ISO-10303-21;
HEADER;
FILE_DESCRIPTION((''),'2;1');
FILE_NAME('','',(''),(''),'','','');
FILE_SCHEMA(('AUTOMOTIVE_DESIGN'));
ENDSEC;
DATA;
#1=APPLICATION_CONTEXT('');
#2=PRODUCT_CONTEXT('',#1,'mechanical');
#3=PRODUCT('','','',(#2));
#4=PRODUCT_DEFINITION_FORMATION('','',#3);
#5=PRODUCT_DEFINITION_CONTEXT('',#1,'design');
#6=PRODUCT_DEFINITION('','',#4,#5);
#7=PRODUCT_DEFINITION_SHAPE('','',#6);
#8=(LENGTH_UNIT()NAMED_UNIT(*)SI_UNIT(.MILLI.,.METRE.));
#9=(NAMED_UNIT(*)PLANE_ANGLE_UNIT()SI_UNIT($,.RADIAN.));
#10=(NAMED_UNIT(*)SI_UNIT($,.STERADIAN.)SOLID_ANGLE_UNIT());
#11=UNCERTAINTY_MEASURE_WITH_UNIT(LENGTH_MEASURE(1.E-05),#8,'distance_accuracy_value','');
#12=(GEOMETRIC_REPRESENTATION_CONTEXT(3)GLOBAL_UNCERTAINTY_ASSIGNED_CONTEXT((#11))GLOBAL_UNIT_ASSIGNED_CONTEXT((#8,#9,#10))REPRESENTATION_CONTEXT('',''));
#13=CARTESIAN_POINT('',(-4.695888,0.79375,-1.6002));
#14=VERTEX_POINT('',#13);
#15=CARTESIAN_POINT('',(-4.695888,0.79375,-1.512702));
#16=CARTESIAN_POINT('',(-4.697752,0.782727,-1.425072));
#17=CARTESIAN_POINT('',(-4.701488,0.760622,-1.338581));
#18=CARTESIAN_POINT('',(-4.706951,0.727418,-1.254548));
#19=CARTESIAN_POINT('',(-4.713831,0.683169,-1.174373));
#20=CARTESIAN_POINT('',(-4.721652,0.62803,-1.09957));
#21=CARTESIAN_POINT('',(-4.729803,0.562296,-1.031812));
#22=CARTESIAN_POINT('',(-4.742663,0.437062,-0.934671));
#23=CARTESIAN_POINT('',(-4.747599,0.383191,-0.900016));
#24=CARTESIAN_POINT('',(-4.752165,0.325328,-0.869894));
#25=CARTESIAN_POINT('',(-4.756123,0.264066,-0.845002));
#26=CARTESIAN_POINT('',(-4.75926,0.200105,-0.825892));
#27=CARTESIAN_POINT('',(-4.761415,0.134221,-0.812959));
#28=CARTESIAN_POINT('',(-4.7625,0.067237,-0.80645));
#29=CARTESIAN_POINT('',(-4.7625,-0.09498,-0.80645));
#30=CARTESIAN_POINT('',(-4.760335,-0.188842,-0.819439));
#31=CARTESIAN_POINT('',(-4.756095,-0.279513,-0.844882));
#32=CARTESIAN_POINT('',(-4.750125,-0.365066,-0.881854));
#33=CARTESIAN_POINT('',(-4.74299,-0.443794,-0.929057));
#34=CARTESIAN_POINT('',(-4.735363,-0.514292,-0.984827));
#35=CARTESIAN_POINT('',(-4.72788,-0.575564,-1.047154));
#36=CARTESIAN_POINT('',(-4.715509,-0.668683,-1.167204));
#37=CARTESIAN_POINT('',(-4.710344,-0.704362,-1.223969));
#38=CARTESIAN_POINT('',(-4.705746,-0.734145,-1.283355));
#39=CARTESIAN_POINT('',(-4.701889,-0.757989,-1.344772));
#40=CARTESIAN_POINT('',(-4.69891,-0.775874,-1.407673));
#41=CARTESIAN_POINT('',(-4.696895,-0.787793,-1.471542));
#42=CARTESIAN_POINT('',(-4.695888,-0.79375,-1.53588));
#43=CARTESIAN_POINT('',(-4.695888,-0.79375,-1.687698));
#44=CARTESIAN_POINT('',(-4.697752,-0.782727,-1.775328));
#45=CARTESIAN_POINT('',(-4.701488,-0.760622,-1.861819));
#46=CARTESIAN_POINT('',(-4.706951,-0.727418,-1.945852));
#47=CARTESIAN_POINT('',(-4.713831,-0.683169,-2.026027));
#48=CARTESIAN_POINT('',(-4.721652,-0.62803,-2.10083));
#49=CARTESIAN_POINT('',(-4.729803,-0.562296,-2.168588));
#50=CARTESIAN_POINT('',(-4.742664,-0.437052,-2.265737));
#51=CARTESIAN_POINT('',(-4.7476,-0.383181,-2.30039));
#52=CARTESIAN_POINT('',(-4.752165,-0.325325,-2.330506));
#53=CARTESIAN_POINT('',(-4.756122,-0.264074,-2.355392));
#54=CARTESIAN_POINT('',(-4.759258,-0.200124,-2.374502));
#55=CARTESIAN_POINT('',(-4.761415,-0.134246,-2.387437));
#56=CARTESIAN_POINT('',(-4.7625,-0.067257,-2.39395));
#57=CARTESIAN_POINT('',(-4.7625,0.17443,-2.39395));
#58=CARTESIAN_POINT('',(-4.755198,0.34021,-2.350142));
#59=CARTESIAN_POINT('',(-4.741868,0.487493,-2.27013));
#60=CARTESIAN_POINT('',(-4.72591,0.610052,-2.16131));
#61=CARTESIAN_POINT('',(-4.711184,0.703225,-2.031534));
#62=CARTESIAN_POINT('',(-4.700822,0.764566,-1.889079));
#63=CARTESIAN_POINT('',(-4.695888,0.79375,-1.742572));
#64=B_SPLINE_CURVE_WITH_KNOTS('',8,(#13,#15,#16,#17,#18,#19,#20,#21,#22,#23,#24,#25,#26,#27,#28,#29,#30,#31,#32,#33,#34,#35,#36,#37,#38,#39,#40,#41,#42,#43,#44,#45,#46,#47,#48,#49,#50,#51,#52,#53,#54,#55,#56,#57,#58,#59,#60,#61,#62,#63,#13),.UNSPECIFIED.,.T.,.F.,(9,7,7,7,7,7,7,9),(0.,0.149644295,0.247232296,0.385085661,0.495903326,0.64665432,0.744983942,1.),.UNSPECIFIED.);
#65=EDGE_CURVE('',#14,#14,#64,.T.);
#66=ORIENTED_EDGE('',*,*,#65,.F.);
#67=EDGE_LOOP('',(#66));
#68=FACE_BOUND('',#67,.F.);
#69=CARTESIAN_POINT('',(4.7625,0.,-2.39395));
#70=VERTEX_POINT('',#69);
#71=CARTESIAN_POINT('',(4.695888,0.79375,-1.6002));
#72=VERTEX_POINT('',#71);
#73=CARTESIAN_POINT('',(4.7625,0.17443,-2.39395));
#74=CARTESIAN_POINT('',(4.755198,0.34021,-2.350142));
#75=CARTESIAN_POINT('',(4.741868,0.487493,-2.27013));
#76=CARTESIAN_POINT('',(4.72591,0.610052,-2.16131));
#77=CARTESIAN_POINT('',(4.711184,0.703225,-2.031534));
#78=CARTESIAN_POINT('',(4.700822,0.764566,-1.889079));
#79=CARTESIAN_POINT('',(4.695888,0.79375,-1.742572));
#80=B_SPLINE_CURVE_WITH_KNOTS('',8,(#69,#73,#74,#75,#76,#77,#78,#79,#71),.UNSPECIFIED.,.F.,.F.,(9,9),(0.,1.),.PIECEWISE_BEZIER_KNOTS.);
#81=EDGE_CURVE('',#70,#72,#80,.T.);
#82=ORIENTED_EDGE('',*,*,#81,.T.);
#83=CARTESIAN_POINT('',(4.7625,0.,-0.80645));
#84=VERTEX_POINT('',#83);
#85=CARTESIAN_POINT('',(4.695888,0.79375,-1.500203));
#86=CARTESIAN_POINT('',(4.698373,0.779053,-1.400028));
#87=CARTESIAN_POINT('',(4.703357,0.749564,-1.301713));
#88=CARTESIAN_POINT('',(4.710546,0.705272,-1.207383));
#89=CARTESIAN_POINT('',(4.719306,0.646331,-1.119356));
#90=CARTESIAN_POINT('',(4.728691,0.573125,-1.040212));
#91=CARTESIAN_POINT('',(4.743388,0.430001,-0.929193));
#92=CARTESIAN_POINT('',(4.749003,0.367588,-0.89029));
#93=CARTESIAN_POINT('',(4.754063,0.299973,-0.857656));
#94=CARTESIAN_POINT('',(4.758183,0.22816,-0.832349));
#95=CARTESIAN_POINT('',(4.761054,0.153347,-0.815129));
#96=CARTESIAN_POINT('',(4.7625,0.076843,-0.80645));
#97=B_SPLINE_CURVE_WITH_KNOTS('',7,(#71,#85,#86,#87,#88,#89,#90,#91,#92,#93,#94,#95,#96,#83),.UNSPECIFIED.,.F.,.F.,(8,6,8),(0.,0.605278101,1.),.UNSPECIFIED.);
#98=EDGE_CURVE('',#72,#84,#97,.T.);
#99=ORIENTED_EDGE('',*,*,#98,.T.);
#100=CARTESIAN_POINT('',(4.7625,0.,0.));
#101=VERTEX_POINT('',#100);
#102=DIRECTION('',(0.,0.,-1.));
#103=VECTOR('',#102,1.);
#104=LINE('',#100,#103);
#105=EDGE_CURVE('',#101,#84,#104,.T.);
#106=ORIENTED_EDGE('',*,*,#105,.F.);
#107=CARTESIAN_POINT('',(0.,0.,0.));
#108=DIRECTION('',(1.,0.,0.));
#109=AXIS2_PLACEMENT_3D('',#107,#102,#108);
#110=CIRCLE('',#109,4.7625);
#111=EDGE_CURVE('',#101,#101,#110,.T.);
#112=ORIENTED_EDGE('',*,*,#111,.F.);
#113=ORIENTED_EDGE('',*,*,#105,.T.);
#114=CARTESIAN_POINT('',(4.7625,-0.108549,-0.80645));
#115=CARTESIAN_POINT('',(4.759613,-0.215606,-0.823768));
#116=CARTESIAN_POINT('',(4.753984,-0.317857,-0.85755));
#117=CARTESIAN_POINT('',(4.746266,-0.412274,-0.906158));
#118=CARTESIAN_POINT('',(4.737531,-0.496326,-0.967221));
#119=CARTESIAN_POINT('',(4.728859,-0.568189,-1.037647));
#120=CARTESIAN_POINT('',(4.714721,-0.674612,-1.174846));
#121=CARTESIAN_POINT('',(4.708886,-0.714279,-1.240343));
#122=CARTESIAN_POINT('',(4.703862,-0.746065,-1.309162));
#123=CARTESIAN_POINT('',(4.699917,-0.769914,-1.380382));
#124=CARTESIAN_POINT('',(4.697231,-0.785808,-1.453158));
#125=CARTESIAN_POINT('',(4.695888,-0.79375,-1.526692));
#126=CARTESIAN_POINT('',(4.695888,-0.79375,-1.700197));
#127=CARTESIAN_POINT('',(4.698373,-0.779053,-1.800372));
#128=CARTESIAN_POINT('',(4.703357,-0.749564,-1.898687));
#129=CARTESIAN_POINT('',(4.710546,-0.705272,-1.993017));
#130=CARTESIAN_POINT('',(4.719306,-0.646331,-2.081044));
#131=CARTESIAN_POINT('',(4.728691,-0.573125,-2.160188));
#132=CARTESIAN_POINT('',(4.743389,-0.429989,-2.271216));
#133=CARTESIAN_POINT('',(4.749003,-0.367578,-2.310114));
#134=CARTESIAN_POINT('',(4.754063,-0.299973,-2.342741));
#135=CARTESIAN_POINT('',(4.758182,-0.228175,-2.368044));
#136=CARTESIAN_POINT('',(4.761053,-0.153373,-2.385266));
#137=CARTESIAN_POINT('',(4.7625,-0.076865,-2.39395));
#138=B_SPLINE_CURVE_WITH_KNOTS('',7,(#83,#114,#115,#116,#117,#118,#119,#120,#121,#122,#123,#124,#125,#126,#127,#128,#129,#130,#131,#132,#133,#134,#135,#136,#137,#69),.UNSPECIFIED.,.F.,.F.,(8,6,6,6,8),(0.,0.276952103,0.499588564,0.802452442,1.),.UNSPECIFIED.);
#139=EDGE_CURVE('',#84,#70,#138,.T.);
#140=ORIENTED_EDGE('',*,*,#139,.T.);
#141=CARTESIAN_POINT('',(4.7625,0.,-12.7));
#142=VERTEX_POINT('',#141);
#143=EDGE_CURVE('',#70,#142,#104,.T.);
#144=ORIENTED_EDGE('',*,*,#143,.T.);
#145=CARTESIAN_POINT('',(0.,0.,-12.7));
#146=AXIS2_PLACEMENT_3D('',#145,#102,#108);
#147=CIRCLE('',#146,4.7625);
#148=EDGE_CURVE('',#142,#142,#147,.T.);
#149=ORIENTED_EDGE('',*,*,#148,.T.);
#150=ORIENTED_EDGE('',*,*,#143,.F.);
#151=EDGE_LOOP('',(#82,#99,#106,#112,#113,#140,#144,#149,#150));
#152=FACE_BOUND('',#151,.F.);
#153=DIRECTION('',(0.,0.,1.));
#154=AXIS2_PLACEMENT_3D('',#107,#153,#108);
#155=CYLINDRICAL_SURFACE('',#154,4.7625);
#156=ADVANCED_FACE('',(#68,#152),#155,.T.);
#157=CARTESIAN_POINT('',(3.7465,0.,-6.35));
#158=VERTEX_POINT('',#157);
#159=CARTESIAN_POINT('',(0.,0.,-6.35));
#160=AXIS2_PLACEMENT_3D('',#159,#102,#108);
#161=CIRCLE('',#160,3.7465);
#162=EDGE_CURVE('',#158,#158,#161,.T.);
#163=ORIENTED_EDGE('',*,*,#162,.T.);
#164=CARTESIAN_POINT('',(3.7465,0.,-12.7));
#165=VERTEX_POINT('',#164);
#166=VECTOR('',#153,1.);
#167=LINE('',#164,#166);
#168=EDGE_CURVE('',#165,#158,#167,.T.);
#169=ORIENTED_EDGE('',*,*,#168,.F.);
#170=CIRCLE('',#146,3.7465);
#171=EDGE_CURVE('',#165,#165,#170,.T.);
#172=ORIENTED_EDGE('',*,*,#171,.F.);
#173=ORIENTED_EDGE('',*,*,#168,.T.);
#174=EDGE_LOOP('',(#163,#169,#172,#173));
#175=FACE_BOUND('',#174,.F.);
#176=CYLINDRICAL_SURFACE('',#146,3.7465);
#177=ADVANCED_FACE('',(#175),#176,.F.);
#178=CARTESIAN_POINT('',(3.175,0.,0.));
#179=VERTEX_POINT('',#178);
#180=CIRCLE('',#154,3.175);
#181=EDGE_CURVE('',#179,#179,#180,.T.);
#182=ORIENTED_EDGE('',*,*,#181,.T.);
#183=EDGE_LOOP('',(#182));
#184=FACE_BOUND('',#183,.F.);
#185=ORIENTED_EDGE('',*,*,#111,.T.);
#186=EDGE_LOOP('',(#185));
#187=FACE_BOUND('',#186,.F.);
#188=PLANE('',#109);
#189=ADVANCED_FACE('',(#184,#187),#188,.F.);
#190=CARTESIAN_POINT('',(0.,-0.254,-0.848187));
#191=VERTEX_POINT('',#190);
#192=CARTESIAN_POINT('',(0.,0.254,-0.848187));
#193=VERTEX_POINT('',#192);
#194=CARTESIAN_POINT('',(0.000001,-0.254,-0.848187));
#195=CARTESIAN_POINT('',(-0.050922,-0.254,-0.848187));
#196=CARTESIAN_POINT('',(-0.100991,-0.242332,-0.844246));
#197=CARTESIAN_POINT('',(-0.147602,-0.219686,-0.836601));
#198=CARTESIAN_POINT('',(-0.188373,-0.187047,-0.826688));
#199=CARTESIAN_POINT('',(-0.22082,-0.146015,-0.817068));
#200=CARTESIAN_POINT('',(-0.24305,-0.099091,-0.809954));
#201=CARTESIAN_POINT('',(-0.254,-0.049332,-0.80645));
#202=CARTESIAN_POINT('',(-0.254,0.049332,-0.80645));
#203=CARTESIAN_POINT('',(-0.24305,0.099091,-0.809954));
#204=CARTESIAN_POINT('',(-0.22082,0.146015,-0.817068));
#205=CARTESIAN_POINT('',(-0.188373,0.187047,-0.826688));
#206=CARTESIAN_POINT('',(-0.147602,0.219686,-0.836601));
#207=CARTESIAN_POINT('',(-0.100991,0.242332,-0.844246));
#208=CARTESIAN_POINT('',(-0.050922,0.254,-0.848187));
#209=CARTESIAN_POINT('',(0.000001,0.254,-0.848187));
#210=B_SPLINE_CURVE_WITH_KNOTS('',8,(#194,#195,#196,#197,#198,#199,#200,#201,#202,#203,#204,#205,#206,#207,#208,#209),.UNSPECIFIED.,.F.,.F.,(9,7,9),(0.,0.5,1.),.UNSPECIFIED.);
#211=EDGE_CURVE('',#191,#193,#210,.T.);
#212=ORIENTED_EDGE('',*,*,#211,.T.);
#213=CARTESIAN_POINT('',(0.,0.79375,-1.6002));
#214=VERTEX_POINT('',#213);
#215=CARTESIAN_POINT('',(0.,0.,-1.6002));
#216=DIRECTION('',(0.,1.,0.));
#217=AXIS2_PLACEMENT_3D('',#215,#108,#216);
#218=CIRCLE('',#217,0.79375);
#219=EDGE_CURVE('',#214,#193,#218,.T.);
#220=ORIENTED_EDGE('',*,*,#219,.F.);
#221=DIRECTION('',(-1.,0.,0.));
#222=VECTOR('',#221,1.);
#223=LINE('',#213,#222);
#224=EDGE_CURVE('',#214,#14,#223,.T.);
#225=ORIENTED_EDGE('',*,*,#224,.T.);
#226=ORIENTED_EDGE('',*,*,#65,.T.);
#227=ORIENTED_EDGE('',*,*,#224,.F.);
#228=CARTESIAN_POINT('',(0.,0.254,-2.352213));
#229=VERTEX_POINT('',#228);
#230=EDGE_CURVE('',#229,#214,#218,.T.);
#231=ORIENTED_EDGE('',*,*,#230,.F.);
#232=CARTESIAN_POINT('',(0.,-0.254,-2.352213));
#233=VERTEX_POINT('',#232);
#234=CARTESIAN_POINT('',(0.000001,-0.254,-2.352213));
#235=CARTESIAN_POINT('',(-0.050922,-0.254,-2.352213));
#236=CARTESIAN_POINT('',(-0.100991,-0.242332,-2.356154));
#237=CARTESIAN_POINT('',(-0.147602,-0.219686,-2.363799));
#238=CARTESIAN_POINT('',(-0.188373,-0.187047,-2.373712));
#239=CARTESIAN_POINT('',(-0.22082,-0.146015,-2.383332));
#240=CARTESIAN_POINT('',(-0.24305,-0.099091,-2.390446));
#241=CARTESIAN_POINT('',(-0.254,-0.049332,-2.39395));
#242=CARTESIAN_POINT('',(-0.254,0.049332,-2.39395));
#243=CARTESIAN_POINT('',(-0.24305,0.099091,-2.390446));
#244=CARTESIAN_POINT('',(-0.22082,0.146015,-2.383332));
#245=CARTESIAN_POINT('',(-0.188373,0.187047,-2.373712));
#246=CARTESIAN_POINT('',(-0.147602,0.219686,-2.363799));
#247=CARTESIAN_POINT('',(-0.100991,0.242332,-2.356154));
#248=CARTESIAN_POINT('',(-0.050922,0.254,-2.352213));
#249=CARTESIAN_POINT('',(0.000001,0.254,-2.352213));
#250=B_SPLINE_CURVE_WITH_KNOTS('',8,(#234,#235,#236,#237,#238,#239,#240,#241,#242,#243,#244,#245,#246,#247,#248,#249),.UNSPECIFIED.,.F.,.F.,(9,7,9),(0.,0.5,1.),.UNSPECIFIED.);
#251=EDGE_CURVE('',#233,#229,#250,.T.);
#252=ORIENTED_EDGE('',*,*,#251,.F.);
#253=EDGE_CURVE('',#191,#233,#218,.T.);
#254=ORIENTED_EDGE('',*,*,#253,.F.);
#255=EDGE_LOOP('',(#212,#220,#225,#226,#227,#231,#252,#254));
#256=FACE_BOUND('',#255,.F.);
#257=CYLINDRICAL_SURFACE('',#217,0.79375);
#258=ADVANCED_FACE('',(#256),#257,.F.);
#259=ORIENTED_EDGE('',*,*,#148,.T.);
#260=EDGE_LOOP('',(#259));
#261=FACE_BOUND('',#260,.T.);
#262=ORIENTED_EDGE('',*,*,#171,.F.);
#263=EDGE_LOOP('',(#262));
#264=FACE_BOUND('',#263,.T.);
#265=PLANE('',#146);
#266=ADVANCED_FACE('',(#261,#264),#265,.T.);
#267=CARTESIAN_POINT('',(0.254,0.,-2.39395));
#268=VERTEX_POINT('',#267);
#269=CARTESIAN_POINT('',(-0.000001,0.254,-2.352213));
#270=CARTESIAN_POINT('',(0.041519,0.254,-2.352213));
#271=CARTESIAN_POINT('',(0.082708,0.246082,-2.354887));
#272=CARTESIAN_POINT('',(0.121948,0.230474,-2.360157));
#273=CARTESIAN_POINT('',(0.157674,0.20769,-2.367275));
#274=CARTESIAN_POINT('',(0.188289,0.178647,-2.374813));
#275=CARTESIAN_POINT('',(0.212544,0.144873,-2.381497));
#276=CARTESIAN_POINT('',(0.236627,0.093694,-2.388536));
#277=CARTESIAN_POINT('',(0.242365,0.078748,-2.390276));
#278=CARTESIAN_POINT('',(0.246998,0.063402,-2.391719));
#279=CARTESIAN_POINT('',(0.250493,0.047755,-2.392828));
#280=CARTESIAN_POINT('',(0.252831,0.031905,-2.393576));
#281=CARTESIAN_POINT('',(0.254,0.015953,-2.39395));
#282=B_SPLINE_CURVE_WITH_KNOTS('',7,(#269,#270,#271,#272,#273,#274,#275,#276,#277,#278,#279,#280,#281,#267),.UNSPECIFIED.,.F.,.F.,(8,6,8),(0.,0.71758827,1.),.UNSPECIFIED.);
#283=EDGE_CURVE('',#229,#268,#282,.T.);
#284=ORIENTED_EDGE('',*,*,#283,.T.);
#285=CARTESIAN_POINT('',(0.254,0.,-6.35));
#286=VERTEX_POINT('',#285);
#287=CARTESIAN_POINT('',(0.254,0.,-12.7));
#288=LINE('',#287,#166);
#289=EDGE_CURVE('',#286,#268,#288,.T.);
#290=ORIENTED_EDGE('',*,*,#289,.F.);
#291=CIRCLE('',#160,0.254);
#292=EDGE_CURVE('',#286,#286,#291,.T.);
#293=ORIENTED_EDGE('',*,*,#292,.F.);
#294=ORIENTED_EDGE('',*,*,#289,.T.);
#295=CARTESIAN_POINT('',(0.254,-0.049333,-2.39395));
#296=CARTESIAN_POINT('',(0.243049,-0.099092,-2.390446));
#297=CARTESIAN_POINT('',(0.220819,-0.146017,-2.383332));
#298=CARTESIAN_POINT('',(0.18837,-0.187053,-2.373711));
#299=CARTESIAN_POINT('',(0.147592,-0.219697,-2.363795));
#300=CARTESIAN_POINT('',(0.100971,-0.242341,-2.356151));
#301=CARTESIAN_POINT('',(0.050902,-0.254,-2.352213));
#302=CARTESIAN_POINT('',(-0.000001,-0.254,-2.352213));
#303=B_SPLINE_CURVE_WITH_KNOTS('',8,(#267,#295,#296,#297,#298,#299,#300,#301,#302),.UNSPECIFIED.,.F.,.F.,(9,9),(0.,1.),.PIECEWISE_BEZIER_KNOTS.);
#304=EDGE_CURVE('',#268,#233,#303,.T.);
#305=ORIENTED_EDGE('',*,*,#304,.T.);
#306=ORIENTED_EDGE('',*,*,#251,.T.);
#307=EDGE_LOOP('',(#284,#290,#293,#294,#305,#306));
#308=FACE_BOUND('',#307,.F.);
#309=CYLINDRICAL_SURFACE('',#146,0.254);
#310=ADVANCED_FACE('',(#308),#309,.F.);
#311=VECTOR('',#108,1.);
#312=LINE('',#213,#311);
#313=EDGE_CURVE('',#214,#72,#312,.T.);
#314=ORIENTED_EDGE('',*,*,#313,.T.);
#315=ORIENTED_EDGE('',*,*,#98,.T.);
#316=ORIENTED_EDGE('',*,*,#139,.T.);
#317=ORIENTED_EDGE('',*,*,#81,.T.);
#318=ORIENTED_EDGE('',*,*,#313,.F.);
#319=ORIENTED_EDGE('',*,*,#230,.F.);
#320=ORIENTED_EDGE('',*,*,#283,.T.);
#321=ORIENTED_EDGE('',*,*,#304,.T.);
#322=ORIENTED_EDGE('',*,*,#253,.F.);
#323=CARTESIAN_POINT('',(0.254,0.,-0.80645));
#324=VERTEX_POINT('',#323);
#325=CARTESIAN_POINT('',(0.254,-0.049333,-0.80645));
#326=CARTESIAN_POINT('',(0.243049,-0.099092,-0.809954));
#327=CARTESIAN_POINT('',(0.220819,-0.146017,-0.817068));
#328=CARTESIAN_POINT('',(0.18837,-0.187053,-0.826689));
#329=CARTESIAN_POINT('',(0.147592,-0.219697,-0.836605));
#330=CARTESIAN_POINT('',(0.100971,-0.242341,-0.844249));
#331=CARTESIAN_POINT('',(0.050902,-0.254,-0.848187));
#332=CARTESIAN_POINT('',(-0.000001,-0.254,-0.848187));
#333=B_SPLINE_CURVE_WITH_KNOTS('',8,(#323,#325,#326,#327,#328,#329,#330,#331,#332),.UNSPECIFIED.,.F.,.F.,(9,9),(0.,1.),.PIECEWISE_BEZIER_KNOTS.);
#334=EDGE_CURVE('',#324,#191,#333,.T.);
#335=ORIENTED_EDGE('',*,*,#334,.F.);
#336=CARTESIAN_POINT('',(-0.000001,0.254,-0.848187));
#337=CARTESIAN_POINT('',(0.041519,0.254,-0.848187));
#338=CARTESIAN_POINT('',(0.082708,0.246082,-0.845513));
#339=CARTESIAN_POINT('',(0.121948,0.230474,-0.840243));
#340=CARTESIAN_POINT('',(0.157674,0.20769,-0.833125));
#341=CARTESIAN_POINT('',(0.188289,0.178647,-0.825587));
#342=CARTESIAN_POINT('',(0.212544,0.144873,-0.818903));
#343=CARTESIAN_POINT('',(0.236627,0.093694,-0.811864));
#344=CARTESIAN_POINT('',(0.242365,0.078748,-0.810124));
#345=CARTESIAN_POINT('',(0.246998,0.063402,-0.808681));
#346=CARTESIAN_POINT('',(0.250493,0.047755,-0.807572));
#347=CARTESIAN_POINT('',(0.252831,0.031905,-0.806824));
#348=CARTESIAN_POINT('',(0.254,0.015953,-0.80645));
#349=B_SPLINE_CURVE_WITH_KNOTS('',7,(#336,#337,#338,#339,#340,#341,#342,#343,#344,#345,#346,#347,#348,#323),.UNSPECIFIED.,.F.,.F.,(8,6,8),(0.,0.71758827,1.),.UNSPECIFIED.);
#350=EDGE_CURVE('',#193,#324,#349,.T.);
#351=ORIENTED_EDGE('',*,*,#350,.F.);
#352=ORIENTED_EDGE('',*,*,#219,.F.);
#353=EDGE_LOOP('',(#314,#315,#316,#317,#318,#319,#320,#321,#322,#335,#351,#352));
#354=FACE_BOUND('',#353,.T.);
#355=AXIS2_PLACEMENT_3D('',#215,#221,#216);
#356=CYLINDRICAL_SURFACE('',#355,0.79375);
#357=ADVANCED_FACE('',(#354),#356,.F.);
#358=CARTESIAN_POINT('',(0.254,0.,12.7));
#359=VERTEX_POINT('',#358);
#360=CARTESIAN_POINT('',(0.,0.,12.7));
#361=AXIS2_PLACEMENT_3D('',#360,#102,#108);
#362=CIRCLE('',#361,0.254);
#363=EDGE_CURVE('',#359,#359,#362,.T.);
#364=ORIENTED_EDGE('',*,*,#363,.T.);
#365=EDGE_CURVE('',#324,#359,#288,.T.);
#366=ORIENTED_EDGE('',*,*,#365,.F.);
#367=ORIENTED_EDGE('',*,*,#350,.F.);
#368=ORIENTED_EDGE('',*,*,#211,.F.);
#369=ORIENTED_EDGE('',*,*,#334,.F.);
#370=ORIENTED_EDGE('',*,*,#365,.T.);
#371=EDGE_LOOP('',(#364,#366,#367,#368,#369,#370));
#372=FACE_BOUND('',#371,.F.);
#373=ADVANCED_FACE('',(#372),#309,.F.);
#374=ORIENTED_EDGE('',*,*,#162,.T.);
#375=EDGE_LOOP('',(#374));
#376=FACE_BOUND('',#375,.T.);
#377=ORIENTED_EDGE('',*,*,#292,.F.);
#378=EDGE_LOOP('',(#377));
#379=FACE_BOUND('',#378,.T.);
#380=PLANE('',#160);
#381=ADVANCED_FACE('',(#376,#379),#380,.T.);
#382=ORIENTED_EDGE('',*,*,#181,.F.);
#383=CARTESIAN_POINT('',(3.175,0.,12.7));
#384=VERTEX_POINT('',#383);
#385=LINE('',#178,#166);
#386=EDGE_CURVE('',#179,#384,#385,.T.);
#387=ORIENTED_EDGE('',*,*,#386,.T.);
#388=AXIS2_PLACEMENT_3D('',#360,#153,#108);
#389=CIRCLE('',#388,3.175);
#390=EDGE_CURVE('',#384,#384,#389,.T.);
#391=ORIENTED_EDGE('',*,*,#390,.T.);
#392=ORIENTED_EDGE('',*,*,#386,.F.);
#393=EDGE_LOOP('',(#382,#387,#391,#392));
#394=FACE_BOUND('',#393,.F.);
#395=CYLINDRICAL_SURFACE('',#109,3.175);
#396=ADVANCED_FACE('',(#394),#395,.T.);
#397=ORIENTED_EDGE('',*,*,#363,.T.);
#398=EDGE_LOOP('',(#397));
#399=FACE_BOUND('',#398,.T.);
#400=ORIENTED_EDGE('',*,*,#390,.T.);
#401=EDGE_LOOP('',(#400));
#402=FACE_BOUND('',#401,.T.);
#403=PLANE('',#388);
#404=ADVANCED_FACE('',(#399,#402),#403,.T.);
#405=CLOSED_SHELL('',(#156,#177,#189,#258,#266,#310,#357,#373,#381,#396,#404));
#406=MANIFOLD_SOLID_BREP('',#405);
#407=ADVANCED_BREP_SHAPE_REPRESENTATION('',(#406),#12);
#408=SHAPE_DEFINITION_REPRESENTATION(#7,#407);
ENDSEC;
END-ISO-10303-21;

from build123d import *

# Parameters (mm, degrees)
F0_R          = 3.175
F1_DEPTH      = 12.7
F2_R          = 4.7625
F2_R_2        = 3.175
F3_DEPTH      = 12.7
F4_R          = 0.254
F5_DEPTH      = 25.4
F6_R          = 3.7465
F6_R_2        = 0.254
F7_DEPTH      = 6.35
F8_R          = 0.79375
F9_DEPTH      = 4.7635
F9_DEPTH_BACK = 4.7635


with BuildPart() as f1:
    # F0 (on Top) → F1 (new body)
    with BuildSketch(Plane.XY):
        Circle(F0_R)
    extrude(amount=F1_DEPTH)

    # F2 (on face) → F3 (join)
    with BuildSketch(Plane(origin=(0, 0, 0), x_dir=(1, 0, 0), z_dir=(0, 0, -1))):
        Circle(F2_R)
        Circle(F2_R_2, mode=Mode.SUBTRACT)
        Circle(F2_R_2)
    extrude(amount=F3_DEPTH)

    # F4 (on face) → F5 (cut)
    with BuildSketch(Plane(origin=(0, 0, -12.7), x_dir=(1, 0, 0), z_dir=(0, 0, -1))):
        Circle(F4_R)
    extrude(amount=-F5_DEPTH, mode=Mode.SUBTRACT)

    # F6 (on face) → F7 (cut)
    with BuildSketch(Plane(origin=(0, 0, -12.7), x_dir=(1, 0, 0), z_dir=(0, 0, -1))):
        Circle(F6_R)
        Circle(F6_R_2, mode=Mode.SUBTRACT)
    extrude(amount=-F7_DEPTH, mode=Mode.SUBTRACT)

    # F8 (on Right) → F9 (cut, two sides)
    with BuildSketch(Plane.YZ) as f9_sk:
        with Locations((0, -1.6002)):
            Circle(F8_R)
    extrude(amount=-F9_DEPTH, mode=Mode.SUBTRACT)
    extrude(f9_sk.sketch, amount=F9_DEPTH_BACK, mode=Mode.SUBTRACT)


solid = f1.part
